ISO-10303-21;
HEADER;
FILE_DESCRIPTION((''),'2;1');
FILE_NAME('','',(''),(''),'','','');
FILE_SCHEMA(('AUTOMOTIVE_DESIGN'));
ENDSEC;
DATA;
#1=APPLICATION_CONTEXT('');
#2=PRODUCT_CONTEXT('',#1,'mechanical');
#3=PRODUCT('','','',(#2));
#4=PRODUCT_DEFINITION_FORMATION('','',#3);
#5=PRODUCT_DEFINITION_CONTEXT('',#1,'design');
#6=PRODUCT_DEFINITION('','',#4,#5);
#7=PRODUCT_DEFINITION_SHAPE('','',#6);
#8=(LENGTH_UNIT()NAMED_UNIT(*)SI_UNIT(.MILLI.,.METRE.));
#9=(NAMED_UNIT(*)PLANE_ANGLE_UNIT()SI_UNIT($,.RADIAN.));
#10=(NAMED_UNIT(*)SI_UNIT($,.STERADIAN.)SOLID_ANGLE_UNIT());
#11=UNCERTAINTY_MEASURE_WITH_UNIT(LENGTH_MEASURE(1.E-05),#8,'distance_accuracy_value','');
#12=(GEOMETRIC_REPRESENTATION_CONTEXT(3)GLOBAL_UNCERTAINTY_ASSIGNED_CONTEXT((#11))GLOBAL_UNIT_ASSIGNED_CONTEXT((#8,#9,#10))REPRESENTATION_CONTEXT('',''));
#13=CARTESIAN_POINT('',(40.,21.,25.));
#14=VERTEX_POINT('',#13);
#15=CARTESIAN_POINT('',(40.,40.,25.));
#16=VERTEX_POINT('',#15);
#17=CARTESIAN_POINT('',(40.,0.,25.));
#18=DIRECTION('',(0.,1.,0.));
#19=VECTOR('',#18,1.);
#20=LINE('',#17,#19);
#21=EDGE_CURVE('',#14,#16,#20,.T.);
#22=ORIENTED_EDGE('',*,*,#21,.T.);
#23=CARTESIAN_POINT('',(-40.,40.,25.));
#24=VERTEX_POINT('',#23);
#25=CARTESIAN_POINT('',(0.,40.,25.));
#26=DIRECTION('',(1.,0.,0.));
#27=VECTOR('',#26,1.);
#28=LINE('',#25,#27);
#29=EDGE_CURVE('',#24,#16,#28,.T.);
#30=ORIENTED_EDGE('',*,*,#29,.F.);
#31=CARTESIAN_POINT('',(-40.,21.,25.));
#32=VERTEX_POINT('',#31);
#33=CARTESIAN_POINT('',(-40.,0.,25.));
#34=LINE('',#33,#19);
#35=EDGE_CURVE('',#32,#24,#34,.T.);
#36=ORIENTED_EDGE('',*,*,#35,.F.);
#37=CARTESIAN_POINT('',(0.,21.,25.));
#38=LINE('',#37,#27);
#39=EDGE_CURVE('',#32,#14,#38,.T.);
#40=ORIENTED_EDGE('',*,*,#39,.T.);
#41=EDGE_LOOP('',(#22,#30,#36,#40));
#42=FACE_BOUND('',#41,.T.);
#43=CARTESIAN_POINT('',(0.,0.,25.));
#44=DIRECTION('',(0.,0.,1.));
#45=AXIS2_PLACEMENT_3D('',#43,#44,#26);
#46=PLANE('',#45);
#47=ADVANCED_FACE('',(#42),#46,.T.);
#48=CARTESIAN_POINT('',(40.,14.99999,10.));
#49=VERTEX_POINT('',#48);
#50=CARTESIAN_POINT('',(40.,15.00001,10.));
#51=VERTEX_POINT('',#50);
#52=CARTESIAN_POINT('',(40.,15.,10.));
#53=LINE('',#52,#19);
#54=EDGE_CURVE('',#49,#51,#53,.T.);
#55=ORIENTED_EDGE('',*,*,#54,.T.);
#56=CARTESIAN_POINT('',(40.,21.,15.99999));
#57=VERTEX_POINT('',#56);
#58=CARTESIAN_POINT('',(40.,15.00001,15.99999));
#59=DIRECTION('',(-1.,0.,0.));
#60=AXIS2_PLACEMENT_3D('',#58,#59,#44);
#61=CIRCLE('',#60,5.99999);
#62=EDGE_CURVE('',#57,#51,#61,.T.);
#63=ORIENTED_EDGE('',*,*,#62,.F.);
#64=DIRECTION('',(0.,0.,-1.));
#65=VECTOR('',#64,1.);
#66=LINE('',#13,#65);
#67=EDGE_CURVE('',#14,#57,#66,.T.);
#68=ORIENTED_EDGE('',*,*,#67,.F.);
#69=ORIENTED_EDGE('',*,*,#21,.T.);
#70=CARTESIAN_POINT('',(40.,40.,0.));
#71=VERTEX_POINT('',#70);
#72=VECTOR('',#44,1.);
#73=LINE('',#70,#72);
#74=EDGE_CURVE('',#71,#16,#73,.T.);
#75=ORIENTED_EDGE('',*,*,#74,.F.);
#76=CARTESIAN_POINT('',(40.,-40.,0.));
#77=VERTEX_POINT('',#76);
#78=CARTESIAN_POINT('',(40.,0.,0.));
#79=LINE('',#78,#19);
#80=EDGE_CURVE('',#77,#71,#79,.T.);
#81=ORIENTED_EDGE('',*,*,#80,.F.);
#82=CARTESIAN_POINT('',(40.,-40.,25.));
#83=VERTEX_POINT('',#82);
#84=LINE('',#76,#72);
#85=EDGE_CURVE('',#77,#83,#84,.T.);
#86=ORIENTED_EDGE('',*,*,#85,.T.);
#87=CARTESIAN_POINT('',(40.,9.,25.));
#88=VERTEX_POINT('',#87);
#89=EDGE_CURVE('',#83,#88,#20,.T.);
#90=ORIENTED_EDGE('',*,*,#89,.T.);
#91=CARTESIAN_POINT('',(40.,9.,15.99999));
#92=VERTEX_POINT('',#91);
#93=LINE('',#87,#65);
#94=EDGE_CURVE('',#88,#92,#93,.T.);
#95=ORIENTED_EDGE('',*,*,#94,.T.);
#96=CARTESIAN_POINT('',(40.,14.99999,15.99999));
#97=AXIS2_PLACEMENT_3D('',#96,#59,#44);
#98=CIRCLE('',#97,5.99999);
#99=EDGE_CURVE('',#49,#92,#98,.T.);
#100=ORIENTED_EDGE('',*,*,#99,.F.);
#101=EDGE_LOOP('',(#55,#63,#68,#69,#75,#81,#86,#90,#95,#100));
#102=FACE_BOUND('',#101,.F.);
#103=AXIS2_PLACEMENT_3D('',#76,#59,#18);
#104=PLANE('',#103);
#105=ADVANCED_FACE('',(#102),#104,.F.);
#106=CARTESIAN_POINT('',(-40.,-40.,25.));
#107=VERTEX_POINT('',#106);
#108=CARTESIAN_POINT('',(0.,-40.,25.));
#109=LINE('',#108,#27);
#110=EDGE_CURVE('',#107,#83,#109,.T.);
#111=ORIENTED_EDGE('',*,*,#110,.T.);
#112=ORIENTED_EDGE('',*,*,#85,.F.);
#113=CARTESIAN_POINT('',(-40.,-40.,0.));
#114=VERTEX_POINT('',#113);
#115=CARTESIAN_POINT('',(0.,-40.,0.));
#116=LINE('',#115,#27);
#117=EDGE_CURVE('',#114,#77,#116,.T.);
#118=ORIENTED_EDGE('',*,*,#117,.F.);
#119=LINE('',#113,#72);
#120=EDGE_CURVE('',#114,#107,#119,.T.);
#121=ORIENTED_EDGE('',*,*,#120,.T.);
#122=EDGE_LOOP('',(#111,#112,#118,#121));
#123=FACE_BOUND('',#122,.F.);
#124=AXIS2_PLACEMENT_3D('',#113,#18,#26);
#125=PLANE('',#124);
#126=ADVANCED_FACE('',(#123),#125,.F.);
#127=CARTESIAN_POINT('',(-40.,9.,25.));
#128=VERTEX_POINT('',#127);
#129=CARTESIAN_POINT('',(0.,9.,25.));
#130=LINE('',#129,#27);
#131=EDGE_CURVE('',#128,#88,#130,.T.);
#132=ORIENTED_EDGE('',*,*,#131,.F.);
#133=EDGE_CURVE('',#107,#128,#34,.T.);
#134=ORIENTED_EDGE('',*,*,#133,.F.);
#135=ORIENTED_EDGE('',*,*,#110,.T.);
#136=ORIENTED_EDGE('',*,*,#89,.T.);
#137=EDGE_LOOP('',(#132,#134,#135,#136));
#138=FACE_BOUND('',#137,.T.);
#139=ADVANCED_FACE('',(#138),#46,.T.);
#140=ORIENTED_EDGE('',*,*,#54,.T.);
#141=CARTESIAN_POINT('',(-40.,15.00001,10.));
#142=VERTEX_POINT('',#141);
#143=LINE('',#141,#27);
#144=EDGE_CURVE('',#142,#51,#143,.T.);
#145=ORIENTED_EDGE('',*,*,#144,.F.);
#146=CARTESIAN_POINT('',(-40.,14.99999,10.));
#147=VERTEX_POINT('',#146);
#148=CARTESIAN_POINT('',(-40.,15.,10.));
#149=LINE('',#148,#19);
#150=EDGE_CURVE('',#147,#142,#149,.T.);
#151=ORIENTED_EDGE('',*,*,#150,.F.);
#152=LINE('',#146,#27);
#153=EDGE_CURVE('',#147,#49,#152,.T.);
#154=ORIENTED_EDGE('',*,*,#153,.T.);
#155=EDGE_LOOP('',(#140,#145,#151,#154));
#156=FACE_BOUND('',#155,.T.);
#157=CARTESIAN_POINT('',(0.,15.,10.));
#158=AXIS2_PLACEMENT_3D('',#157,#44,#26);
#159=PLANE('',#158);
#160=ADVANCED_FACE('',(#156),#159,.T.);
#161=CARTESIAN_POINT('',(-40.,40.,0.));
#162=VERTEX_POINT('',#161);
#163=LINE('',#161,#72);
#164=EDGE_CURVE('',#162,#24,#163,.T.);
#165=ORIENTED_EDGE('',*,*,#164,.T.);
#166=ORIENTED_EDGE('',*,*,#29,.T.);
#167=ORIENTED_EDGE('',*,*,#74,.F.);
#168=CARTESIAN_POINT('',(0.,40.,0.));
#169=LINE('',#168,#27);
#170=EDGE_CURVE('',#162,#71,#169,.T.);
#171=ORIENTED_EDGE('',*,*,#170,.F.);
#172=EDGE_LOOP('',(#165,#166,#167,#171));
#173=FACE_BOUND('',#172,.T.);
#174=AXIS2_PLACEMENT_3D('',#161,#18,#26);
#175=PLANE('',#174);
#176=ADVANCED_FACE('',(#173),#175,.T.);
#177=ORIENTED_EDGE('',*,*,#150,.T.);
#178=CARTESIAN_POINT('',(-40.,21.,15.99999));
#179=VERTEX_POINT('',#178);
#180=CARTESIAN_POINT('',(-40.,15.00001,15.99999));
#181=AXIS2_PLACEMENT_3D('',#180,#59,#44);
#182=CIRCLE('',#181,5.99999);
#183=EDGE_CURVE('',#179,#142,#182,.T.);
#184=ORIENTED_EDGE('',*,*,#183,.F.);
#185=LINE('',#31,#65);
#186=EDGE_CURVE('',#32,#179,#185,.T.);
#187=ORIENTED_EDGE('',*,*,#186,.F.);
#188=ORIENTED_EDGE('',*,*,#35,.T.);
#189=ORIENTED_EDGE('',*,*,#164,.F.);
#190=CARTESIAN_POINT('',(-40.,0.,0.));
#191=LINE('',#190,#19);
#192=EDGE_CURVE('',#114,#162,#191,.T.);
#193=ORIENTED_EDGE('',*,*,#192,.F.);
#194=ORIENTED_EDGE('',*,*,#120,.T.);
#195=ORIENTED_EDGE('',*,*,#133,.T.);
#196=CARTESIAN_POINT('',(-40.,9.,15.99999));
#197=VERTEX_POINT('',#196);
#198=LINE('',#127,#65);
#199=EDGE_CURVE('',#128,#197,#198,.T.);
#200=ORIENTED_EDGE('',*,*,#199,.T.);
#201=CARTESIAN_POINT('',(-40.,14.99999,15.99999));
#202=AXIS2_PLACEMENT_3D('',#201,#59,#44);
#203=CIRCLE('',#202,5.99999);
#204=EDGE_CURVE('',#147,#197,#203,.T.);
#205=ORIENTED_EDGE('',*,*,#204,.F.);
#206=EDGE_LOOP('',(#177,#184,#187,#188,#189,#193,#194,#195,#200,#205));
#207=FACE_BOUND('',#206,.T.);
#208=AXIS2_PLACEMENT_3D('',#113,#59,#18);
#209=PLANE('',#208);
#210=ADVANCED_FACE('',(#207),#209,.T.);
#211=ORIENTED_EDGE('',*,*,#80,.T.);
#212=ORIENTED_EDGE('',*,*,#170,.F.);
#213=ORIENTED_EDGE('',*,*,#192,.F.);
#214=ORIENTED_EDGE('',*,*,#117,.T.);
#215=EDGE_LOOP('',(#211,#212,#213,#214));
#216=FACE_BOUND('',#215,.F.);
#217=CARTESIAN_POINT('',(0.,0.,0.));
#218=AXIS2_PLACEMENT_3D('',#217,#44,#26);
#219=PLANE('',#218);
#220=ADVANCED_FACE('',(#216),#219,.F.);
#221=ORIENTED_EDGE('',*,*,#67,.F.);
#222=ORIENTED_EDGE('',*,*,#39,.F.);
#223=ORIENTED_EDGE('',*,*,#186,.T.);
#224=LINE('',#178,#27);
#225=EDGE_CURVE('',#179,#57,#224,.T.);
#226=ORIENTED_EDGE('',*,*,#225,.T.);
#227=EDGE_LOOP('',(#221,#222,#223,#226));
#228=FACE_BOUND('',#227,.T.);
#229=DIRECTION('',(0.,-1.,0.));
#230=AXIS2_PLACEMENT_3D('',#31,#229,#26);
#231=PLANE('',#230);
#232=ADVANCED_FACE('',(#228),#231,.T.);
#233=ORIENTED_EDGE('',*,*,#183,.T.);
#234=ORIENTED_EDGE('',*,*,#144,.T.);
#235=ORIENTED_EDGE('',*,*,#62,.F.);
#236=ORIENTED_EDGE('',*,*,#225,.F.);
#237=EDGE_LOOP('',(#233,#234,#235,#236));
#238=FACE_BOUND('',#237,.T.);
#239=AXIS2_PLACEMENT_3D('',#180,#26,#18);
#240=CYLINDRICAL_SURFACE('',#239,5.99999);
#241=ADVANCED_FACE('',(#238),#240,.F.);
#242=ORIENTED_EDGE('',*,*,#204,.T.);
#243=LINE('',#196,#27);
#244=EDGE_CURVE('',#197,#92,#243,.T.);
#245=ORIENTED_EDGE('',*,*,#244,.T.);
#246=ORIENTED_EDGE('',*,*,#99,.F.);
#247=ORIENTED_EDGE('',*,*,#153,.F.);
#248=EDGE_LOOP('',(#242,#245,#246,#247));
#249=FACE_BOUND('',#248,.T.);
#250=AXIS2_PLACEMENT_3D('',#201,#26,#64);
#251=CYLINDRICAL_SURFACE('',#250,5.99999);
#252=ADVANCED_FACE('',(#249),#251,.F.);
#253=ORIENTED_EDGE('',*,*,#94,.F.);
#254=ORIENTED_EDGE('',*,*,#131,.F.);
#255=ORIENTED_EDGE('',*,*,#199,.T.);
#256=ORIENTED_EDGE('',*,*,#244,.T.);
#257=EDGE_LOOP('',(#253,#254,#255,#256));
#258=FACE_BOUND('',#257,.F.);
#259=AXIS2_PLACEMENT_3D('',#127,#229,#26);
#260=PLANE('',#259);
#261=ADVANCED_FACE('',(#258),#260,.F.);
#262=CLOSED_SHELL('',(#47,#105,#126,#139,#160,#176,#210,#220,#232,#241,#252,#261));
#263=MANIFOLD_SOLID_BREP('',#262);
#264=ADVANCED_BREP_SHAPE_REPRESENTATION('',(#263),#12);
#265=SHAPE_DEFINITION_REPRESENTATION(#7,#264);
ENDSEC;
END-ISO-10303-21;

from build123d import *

# Parameters (mm, degrees)
F0_W     = 80
F0_H     = 80
F1_DEPTH = 25
F2_W     = 80
F2_H     = 12
F3_DEPTH = 15
F4_R     = 5.99999


# Not quite as in the source:
# - a fillet or chamfer is up to 0.001 mm smaller than in the source, because OpenCascade refuses the exact size


with BuildPart() as f1:
    # F0 (on Top) → F1 (new body)
    with BuildSketch(Plane.XY):
        Rectangle(F0_W, F0_H)
    extrude(amount=F1_DEPTH)

    # F2 (on face) → F3 (cut)
    with BuildSketch(Plane.XY.offset(25)):
        with Locations((0, 15)):
            Rectangle(F2_W, F2_H)
    extrude(amount=-F3_DEPTH, mode=Mode.SUBTRACT)

    # F4 (radius 6 in the source; OpenCascade refuses exactly that, so slightly less here)
    f4_edges = [f1.edges().sort_by_distance(p)[0] for p in [
        (0, 9, 10),
        (0, 21, 10),
    ]]
    fillet(f4_edges, radius=F4_R)


solid = f1.part
